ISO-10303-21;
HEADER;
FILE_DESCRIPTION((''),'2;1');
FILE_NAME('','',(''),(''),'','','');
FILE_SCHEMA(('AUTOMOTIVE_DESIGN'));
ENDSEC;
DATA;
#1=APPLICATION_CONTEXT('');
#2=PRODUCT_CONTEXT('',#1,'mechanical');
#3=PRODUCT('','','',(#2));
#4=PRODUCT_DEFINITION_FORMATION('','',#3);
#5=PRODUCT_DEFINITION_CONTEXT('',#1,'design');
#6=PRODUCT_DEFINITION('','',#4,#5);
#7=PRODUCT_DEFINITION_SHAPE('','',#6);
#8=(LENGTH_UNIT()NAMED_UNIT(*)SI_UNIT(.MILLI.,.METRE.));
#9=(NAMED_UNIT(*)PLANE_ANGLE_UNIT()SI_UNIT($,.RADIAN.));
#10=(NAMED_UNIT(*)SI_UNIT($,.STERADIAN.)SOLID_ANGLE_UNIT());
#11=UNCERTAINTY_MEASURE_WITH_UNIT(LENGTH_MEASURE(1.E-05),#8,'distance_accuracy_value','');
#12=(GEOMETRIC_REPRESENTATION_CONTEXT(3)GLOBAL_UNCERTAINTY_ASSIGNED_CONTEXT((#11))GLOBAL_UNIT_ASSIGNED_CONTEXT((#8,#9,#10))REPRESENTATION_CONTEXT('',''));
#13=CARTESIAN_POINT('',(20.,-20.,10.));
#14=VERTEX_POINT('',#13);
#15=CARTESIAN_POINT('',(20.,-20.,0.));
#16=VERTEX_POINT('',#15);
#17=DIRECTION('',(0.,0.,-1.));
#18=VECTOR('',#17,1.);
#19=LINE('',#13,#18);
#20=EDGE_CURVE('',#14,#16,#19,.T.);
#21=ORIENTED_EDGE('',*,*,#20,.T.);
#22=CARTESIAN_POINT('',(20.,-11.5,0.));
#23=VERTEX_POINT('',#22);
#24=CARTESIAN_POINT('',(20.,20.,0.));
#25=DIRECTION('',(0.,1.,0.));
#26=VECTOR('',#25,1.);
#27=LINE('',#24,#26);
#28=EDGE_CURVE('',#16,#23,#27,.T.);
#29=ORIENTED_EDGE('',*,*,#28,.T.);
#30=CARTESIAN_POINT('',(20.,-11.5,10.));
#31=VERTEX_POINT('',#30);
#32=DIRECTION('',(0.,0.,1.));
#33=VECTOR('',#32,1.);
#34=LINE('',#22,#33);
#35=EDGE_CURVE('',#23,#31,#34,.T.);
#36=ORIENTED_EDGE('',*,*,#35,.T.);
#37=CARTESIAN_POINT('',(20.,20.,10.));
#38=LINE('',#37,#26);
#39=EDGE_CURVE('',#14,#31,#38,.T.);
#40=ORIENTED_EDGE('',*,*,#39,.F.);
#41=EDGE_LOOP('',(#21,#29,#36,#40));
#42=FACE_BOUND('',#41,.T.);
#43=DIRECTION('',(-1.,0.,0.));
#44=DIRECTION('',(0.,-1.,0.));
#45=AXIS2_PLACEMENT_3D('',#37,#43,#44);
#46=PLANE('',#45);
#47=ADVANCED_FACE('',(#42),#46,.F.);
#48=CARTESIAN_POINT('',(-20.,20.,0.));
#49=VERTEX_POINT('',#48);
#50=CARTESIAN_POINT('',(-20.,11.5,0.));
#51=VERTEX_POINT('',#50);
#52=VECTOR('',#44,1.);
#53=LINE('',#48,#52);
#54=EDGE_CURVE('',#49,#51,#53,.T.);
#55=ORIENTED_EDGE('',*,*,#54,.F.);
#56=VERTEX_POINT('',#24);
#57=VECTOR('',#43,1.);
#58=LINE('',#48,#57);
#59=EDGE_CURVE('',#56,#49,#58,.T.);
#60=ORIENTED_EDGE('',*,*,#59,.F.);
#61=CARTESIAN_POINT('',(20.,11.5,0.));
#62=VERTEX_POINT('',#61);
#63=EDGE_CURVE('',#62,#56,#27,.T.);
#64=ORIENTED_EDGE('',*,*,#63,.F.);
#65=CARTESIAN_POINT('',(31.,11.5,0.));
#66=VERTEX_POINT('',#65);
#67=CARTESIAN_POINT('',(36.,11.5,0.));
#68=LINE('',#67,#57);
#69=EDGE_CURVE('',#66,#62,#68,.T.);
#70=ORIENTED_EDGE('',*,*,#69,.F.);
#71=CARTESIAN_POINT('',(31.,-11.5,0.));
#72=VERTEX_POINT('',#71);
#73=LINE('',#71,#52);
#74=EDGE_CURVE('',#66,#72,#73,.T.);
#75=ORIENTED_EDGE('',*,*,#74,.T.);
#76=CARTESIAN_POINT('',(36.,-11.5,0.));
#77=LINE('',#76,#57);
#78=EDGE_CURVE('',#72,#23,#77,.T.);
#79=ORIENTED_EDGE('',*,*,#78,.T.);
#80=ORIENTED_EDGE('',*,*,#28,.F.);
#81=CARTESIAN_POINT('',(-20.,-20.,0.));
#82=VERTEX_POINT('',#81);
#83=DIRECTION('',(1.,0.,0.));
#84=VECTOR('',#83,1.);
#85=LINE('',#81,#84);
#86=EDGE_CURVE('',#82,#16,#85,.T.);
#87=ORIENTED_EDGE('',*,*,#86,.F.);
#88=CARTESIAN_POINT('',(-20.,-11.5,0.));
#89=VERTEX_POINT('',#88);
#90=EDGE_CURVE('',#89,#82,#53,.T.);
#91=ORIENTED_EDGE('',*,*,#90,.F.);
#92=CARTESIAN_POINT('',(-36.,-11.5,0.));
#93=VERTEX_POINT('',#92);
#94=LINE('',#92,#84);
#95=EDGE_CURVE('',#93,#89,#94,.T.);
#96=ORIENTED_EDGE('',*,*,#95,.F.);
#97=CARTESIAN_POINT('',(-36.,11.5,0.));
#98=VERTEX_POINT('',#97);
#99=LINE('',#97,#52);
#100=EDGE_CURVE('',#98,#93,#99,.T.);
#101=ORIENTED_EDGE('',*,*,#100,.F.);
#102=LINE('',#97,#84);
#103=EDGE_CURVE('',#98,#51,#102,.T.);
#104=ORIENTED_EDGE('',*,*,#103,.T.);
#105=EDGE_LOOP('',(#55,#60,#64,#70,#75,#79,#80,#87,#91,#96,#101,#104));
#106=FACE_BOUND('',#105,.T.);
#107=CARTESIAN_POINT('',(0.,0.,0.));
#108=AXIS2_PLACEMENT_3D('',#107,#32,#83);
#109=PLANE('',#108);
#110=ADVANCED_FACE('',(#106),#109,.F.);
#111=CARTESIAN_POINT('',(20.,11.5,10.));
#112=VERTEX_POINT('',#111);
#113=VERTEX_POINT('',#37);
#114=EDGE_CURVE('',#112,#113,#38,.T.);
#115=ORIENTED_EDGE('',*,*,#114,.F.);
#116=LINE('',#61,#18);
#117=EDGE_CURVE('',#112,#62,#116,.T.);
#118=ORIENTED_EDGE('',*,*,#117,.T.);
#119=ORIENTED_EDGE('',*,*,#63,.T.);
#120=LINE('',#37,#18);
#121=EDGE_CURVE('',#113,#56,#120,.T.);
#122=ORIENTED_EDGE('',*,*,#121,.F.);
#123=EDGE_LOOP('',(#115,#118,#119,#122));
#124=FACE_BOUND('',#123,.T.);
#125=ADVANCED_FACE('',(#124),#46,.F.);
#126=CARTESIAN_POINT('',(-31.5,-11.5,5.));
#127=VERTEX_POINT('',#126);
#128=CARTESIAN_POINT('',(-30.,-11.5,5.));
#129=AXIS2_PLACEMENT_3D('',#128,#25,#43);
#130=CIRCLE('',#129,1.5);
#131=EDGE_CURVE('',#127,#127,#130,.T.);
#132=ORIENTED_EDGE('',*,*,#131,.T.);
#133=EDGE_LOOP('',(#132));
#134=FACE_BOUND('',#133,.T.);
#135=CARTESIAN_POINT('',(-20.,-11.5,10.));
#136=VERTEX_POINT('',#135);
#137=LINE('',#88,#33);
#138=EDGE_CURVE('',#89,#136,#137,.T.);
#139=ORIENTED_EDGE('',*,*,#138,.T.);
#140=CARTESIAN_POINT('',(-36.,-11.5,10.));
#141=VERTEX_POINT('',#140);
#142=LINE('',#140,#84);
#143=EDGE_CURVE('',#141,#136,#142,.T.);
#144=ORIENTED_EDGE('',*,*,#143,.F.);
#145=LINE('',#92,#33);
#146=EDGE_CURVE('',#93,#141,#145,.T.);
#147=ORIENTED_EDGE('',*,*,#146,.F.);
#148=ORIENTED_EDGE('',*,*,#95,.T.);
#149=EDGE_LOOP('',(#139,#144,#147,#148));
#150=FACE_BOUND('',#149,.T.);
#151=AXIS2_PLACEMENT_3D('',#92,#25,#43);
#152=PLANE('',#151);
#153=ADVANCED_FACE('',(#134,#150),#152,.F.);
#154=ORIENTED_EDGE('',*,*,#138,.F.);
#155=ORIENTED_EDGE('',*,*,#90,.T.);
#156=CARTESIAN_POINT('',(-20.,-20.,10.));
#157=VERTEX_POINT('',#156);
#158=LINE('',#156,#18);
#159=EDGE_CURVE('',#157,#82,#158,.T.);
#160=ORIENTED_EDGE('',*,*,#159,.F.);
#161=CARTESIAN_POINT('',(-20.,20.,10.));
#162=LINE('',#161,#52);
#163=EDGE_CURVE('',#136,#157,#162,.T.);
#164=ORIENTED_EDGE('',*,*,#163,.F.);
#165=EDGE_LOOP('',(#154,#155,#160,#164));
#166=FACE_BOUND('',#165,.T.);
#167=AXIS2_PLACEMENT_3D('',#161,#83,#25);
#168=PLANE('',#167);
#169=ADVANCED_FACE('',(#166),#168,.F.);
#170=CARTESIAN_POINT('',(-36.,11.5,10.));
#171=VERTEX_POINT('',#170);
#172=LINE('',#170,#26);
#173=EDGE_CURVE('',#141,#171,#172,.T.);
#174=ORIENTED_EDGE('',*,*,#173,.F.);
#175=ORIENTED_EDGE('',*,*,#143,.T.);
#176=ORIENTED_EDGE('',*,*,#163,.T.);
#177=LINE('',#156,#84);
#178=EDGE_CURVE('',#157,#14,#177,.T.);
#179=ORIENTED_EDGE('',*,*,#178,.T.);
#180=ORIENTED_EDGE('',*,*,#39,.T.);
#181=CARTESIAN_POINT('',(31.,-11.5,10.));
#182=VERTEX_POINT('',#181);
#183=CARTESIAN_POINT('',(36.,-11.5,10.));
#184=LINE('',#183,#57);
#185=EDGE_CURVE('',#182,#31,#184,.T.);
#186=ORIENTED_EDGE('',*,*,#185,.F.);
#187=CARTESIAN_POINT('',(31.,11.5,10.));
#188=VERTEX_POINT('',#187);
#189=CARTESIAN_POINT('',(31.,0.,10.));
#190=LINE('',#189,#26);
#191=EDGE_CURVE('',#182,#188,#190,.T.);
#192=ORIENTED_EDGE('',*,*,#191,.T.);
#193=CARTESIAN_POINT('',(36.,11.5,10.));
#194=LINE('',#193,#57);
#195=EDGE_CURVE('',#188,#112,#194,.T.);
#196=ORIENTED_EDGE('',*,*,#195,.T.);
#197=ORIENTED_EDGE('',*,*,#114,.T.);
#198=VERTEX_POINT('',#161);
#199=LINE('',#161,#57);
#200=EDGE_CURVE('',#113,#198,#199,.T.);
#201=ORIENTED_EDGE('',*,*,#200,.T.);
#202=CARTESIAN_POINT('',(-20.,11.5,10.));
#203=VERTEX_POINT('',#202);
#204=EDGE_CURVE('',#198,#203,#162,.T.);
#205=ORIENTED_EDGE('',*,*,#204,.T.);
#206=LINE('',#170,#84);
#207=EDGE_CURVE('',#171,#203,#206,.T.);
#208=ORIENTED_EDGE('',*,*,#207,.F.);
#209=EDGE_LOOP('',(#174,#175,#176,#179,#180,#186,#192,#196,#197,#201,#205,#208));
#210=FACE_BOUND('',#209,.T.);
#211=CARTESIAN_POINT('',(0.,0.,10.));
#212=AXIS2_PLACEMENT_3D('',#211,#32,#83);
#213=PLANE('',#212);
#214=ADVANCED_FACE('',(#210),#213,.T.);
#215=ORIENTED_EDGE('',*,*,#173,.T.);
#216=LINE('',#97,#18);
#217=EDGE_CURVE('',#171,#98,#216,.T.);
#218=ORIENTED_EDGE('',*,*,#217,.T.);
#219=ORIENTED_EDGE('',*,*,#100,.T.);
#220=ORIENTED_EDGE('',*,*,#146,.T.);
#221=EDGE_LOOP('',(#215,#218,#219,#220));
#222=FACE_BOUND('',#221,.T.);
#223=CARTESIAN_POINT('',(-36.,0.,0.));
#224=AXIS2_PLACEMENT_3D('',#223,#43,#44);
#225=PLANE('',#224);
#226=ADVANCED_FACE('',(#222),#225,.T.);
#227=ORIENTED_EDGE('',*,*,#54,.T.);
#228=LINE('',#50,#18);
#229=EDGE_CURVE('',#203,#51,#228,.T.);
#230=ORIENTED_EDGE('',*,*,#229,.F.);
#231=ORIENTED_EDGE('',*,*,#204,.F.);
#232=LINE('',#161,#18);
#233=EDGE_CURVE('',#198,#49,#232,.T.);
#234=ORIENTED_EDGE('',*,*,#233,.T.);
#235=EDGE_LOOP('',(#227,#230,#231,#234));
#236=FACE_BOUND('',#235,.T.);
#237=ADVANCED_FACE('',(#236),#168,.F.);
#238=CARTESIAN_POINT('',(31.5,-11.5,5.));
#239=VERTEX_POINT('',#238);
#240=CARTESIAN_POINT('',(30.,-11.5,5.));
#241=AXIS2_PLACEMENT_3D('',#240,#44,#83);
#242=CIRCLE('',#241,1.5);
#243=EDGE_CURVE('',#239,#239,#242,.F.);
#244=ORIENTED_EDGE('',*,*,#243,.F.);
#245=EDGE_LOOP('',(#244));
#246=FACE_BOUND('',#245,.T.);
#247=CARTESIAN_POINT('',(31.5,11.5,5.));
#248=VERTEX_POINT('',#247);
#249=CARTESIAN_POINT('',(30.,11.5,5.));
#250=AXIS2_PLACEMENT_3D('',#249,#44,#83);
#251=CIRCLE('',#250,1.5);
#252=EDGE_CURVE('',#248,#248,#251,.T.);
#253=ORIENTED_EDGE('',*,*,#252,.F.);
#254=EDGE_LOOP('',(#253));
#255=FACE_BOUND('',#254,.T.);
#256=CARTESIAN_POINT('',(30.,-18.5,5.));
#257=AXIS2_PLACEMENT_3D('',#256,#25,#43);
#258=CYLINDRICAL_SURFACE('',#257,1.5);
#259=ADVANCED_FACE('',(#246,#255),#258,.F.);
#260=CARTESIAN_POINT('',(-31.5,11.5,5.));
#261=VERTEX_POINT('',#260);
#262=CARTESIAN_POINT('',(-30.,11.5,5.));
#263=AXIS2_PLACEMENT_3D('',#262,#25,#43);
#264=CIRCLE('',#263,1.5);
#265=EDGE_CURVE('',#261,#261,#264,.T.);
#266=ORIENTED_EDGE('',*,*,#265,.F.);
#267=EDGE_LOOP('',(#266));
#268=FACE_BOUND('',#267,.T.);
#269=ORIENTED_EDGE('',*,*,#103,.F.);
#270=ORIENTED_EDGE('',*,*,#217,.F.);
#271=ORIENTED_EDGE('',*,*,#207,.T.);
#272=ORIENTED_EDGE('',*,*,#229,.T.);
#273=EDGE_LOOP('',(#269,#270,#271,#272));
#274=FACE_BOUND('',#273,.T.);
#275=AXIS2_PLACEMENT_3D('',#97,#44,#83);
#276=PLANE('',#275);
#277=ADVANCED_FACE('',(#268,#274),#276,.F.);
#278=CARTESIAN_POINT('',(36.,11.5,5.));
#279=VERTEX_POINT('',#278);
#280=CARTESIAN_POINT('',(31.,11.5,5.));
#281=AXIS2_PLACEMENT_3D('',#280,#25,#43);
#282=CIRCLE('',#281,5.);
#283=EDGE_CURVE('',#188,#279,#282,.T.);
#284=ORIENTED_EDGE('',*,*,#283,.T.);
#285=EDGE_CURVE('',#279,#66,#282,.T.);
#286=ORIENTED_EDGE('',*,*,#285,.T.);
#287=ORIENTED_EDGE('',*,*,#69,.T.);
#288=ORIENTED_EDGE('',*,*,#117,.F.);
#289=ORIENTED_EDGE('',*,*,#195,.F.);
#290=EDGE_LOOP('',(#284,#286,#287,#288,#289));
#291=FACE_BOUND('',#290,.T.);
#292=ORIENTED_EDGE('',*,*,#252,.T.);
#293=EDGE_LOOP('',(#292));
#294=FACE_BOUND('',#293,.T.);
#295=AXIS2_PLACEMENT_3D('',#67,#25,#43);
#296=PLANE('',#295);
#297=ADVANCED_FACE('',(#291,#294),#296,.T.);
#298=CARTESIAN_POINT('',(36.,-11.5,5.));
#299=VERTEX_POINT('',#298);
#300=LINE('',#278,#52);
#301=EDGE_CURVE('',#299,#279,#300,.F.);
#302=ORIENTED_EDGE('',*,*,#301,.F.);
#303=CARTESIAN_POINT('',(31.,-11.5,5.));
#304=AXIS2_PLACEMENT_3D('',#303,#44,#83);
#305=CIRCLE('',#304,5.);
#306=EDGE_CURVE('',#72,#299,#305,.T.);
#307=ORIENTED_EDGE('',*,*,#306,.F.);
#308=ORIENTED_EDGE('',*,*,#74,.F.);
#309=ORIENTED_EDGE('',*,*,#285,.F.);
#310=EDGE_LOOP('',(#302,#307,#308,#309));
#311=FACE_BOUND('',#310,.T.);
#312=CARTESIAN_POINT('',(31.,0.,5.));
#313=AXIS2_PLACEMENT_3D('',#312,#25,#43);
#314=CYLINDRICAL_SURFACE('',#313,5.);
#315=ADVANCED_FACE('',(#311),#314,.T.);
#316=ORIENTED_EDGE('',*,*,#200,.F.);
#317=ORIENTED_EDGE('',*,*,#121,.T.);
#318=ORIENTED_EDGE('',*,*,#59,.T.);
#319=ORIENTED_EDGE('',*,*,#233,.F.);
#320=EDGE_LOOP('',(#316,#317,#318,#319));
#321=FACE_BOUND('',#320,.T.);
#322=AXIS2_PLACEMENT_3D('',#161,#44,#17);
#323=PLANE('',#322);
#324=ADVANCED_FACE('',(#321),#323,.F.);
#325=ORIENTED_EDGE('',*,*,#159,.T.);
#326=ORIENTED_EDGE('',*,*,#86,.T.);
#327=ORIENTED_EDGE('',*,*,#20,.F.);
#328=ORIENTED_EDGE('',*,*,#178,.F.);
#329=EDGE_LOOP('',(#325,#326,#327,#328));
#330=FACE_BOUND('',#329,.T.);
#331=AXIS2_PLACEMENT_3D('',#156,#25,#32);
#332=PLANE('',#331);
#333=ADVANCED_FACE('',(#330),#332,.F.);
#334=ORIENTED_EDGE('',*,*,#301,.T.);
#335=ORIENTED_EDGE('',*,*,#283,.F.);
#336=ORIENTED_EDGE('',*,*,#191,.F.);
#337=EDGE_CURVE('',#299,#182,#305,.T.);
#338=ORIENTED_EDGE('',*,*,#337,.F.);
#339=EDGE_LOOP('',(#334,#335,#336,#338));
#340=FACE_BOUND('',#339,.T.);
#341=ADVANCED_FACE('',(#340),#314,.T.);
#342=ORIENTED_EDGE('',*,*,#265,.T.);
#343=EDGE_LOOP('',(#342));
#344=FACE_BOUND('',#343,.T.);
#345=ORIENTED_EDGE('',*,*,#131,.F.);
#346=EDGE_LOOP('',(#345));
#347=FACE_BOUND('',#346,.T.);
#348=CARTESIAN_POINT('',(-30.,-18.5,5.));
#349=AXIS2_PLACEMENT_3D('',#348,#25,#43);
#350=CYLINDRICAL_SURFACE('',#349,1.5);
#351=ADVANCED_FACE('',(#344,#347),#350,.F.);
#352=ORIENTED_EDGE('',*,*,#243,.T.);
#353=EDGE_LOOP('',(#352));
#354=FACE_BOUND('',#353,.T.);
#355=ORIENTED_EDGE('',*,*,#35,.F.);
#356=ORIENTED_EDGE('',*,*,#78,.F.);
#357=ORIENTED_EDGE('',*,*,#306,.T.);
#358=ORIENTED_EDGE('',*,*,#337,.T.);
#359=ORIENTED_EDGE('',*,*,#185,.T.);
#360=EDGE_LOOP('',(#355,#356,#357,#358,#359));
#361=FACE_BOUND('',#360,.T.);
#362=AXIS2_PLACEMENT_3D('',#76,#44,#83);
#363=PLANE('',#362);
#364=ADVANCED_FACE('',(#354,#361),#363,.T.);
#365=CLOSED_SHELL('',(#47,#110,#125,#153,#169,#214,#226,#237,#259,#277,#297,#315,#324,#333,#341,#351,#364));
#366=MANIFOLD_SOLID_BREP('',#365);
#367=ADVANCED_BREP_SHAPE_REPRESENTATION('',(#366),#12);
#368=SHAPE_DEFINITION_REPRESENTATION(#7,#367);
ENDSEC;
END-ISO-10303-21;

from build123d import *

# Parameters (mm, degrees)
SKETCH_1_W          = 40
SKETCH_1_H          = 40
EXTRUDE_1_DEPTH     = 10
SKETCH_2_W          = 10
SKETCH_2_H          = 23
EXTRUDE_2_DEPTH     = 16
SKETCH_3_R          = 1.5
CUT_EXTRUDE_1_DEPTH = 30
FILLET_2_R          = 5


with BuildPart() as part:
    # 草图1 → 凸台-拉伸1 (new body)
    with BuildSketch(Plane.XY):
        Rectangle(SKETCH_1_W, SKETCH_1_H)
    extrude(amount=EXTRUDE_1_DEPTH)

    # 草图2 → 凸台-拉伸2 (add)
    with BuildSketch(Plane.ZY.offset(20)):
        with Locations((5, 0)):
            Rectangle(SKETCH_2_W, SKETCH_2_H)
    extrude_2 = extrude(amount=EXTRUDE_2_DEPTH)

    # 草图3 → 切除-拉伸1 (cut)
    with BuildSketch(Plane(origin=(0, 11.5, 0), x_dir=(1, 0, 0), z_dir=(0, 1, 0))):
        with Locations(Location((-30, -5, 0), (0, 0, 180))):
            Circle(SKETCH_3_R)
    cut_extrude_1 = extrude(amount=-CUT_EXTRUDE_1_DEPTH, mode=Mode.SUBTRACT)

    # 镜向1: 凸台-拉伸2, 切除-拉伸1 across plane
    add(extrude_2.mirror(Plane(origin=(0, 0, 0), x_dir=(0, 0, 1), z_dir=(1, 0, 0))))
    add(cut_extrude_1.mirror(Plane(origin=(0, 0, 0), x_dir=(0, 0, 1), z_dir=(1, 0, 0))), mode=Mode.SUBTRACT)

    # 圆角2
    fillet_2_edges = [part.edges().sort_by_distance(p)[0] for p in [
        (36, 0, 0),
        (36, 0, 10),
    ]]
    fillet(fillet_2_edges, radius=FILLET_2_R - 0.0001)  # a hair under: the kernel refuses the full size


solid = part.part
